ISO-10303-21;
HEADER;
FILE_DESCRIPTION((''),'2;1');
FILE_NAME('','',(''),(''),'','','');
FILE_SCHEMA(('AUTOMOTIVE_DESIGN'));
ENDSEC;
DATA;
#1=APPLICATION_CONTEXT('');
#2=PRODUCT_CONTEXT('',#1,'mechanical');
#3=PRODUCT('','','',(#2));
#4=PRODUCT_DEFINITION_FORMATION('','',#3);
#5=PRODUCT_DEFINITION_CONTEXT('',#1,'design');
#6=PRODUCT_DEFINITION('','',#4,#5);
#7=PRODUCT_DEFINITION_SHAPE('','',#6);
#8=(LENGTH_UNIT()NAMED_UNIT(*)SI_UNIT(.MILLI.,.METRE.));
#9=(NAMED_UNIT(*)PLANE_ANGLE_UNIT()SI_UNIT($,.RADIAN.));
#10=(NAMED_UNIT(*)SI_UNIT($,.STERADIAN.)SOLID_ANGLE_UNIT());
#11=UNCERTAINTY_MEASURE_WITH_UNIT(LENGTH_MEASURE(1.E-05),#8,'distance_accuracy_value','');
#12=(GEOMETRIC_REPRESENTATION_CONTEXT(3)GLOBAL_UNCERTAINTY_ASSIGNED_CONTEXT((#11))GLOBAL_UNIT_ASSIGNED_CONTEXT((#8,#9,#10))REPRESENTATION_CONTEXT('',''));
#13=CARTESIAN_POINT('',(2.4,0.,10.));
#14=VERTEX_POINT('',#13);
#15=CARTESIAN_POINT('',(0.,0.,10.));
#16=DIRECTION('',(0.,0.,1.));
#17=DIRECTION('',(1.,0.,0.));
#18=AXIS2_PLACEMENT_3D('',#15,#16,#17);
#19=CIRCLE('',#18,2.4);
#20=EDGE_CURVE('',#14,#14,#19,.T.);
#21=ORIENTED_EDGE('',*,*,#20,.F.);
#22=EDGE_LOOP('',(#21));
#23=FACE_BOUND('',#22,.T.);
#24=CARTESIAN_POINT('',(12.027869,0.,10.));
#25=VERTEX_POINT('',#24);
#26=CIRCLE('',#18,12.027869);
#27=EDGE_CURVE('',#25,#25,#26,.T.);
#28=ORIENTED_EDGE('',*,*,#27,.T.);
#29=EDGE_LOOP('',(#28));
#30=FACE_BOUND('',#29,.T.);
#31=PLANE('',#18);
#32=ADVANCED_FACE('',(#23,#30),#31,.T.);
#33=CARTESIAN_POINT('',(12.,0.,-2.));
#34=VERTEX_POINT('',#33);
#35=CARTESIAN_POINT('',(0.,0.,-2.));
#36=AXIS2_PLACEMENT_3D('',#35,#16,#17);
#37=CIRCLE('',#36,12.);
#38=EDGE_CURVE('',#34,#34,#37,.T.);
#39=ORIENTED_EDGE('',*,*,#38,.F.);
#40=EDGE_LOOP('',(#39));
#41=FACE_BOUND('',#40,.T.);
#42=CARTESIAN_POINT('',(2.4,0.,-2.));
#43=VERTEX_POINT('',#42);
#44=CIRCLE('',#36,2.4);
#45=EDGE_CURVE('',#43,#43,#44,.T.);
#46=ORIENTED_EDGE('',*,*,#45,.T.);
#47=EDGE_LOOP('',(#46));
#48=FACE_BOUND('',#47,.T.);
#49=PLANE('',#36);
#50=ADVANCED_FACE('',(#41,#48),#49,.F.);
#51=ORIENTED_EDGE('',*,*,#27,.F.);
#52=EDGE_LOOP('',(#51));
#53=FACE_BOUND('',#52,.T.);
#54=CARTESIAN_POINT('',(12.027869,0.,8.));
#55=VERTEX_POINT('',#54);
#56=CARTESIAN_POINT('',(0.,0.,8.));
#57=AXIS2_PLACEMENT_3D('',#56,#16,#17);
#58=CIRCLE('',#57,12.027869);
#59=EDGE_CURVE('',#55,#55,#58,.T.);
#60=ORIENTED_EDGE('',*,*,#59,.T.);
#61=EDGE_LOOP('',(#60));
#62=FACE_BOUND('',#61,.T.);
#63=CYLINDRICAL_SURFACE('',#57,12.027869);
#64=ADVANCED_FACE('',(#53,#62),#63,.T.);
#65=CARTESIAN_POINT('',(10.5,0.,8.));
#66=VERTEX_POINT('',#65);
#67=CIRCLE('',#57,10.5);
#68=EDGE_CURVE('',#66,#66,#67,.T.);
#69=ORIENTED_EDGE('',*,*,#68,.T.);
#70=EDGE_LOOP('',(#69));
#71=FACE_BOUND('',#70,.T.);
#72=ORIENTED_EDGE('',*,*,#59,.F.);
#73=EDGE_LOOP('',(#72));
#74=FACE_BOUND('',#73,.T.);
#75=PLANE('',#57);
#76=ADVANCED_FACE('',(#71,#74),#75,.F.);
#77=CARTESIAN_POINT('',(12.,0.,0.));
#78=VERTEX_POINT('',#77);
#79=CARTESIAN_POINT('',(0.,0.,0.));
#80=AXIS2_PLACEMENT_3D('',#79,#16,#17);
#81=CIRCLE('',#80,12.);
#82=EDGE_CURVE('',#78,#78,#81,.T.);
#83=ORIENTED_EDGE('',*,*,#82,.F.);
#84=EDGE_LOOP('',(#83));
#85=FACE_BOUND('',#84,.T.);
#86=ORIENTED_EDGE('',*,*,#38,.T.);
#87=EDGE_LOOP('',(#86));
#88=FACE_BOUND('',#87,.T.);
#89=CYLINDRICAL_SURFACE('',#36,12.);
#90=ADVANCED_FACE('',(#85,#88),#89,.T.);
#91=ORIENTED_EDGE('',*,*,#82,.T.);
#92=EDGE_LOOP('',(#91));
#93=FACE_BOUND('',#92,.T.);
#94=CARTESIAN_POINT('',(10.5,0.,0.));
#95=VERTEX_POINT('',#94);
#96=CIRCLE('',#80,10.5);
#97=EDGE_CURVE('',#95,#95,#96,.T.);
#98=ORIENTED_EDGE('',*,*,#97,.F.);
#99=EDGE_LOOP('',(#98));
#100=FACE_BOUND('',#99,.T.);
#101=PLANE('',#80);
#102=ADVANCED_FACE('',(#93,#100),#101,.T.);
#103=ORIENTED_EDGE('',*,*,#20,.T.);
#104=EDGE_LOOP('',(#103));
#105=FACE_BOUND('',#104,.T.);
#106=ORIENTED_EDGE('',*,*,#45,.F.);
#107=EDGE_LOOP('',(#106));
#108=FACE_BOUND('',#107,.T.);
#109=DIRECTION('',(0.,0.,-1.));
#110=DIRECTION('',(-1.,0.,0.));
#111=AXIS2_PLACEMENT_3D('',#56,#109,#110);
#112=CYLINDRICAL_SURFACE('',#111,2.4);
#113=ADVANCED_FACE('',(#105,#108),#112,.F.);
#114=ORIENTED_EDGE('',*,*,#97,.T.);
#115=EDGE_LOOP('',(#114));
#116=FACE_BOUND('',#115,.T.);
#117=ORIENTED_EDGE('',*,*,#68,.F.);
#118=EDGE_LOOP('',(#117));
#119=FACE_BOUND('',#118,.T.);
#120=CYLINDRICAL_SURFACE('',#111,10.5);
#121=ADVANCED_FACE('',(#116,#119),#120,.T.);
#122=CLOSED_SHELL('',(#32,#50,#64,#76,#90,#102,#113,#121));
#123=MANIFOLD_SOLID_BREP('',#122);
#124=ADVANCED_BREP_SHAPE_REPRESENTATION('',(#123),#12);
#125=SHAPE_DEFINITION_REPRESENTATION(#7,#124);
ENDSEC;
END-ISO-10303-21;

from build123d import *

# Parameters (mm, degrees)
ESBO_O1_R                = 10.5
ESBO_O1_R_2              = 2.4
RESSALTO_EXTRUS_O1_DEPTH = 8
RESSALTO_EXTRUS_O2_START = -2
ESBO_O2_R                = 12
ESBO_O2_R_2              = 2.4
RESSALTO_EXTRUS_O2_DEPTH = 2
F_3DSKETCH2_R            = 12.027868724
F_3DSKETCH2_R_2          = 2.4
RESSALTO_EXTRUS_O3_DEPTH = 2


with BuildPart() as part:
    # Esboço1 → Ressalto-extrusão1 (new body)
    with BuildSketch(Plane.XY):
        Circle(ESBO_O1_R)
        Circle(ESBO_O1_R_2, mode=Mode.SUBTRACT)
    extrude(amount=RESSALTO_EXTRUS_O1_DEPTH)

    # Esboço2 → Ressalto-extrusão2 (add)
    with BuildSketch(Plane.XY.offset(RESSALTO_EXTRUS_O2_START)):
        Circle(ESBO_O2_R)
        Circle(ESBO_O2_R_2, mode=Mode.SUBTRACT)
    extrude(amount=RESSALTO_EXTRUS_O2_DEPTH)

    # 3DSketch2 → Ressalto-extrusão3 (add)
    with BuildSketch(Plane.XY.offset(8)):
        Circle(F_3DSKETCH2_R)
        Circle(F_3DSKETCH2_R_2, mode=Mode.SUBTRACT)
    extrude(amount=RESSALTO_EXTRUS_O3_DEPTH)


solid = part.part
